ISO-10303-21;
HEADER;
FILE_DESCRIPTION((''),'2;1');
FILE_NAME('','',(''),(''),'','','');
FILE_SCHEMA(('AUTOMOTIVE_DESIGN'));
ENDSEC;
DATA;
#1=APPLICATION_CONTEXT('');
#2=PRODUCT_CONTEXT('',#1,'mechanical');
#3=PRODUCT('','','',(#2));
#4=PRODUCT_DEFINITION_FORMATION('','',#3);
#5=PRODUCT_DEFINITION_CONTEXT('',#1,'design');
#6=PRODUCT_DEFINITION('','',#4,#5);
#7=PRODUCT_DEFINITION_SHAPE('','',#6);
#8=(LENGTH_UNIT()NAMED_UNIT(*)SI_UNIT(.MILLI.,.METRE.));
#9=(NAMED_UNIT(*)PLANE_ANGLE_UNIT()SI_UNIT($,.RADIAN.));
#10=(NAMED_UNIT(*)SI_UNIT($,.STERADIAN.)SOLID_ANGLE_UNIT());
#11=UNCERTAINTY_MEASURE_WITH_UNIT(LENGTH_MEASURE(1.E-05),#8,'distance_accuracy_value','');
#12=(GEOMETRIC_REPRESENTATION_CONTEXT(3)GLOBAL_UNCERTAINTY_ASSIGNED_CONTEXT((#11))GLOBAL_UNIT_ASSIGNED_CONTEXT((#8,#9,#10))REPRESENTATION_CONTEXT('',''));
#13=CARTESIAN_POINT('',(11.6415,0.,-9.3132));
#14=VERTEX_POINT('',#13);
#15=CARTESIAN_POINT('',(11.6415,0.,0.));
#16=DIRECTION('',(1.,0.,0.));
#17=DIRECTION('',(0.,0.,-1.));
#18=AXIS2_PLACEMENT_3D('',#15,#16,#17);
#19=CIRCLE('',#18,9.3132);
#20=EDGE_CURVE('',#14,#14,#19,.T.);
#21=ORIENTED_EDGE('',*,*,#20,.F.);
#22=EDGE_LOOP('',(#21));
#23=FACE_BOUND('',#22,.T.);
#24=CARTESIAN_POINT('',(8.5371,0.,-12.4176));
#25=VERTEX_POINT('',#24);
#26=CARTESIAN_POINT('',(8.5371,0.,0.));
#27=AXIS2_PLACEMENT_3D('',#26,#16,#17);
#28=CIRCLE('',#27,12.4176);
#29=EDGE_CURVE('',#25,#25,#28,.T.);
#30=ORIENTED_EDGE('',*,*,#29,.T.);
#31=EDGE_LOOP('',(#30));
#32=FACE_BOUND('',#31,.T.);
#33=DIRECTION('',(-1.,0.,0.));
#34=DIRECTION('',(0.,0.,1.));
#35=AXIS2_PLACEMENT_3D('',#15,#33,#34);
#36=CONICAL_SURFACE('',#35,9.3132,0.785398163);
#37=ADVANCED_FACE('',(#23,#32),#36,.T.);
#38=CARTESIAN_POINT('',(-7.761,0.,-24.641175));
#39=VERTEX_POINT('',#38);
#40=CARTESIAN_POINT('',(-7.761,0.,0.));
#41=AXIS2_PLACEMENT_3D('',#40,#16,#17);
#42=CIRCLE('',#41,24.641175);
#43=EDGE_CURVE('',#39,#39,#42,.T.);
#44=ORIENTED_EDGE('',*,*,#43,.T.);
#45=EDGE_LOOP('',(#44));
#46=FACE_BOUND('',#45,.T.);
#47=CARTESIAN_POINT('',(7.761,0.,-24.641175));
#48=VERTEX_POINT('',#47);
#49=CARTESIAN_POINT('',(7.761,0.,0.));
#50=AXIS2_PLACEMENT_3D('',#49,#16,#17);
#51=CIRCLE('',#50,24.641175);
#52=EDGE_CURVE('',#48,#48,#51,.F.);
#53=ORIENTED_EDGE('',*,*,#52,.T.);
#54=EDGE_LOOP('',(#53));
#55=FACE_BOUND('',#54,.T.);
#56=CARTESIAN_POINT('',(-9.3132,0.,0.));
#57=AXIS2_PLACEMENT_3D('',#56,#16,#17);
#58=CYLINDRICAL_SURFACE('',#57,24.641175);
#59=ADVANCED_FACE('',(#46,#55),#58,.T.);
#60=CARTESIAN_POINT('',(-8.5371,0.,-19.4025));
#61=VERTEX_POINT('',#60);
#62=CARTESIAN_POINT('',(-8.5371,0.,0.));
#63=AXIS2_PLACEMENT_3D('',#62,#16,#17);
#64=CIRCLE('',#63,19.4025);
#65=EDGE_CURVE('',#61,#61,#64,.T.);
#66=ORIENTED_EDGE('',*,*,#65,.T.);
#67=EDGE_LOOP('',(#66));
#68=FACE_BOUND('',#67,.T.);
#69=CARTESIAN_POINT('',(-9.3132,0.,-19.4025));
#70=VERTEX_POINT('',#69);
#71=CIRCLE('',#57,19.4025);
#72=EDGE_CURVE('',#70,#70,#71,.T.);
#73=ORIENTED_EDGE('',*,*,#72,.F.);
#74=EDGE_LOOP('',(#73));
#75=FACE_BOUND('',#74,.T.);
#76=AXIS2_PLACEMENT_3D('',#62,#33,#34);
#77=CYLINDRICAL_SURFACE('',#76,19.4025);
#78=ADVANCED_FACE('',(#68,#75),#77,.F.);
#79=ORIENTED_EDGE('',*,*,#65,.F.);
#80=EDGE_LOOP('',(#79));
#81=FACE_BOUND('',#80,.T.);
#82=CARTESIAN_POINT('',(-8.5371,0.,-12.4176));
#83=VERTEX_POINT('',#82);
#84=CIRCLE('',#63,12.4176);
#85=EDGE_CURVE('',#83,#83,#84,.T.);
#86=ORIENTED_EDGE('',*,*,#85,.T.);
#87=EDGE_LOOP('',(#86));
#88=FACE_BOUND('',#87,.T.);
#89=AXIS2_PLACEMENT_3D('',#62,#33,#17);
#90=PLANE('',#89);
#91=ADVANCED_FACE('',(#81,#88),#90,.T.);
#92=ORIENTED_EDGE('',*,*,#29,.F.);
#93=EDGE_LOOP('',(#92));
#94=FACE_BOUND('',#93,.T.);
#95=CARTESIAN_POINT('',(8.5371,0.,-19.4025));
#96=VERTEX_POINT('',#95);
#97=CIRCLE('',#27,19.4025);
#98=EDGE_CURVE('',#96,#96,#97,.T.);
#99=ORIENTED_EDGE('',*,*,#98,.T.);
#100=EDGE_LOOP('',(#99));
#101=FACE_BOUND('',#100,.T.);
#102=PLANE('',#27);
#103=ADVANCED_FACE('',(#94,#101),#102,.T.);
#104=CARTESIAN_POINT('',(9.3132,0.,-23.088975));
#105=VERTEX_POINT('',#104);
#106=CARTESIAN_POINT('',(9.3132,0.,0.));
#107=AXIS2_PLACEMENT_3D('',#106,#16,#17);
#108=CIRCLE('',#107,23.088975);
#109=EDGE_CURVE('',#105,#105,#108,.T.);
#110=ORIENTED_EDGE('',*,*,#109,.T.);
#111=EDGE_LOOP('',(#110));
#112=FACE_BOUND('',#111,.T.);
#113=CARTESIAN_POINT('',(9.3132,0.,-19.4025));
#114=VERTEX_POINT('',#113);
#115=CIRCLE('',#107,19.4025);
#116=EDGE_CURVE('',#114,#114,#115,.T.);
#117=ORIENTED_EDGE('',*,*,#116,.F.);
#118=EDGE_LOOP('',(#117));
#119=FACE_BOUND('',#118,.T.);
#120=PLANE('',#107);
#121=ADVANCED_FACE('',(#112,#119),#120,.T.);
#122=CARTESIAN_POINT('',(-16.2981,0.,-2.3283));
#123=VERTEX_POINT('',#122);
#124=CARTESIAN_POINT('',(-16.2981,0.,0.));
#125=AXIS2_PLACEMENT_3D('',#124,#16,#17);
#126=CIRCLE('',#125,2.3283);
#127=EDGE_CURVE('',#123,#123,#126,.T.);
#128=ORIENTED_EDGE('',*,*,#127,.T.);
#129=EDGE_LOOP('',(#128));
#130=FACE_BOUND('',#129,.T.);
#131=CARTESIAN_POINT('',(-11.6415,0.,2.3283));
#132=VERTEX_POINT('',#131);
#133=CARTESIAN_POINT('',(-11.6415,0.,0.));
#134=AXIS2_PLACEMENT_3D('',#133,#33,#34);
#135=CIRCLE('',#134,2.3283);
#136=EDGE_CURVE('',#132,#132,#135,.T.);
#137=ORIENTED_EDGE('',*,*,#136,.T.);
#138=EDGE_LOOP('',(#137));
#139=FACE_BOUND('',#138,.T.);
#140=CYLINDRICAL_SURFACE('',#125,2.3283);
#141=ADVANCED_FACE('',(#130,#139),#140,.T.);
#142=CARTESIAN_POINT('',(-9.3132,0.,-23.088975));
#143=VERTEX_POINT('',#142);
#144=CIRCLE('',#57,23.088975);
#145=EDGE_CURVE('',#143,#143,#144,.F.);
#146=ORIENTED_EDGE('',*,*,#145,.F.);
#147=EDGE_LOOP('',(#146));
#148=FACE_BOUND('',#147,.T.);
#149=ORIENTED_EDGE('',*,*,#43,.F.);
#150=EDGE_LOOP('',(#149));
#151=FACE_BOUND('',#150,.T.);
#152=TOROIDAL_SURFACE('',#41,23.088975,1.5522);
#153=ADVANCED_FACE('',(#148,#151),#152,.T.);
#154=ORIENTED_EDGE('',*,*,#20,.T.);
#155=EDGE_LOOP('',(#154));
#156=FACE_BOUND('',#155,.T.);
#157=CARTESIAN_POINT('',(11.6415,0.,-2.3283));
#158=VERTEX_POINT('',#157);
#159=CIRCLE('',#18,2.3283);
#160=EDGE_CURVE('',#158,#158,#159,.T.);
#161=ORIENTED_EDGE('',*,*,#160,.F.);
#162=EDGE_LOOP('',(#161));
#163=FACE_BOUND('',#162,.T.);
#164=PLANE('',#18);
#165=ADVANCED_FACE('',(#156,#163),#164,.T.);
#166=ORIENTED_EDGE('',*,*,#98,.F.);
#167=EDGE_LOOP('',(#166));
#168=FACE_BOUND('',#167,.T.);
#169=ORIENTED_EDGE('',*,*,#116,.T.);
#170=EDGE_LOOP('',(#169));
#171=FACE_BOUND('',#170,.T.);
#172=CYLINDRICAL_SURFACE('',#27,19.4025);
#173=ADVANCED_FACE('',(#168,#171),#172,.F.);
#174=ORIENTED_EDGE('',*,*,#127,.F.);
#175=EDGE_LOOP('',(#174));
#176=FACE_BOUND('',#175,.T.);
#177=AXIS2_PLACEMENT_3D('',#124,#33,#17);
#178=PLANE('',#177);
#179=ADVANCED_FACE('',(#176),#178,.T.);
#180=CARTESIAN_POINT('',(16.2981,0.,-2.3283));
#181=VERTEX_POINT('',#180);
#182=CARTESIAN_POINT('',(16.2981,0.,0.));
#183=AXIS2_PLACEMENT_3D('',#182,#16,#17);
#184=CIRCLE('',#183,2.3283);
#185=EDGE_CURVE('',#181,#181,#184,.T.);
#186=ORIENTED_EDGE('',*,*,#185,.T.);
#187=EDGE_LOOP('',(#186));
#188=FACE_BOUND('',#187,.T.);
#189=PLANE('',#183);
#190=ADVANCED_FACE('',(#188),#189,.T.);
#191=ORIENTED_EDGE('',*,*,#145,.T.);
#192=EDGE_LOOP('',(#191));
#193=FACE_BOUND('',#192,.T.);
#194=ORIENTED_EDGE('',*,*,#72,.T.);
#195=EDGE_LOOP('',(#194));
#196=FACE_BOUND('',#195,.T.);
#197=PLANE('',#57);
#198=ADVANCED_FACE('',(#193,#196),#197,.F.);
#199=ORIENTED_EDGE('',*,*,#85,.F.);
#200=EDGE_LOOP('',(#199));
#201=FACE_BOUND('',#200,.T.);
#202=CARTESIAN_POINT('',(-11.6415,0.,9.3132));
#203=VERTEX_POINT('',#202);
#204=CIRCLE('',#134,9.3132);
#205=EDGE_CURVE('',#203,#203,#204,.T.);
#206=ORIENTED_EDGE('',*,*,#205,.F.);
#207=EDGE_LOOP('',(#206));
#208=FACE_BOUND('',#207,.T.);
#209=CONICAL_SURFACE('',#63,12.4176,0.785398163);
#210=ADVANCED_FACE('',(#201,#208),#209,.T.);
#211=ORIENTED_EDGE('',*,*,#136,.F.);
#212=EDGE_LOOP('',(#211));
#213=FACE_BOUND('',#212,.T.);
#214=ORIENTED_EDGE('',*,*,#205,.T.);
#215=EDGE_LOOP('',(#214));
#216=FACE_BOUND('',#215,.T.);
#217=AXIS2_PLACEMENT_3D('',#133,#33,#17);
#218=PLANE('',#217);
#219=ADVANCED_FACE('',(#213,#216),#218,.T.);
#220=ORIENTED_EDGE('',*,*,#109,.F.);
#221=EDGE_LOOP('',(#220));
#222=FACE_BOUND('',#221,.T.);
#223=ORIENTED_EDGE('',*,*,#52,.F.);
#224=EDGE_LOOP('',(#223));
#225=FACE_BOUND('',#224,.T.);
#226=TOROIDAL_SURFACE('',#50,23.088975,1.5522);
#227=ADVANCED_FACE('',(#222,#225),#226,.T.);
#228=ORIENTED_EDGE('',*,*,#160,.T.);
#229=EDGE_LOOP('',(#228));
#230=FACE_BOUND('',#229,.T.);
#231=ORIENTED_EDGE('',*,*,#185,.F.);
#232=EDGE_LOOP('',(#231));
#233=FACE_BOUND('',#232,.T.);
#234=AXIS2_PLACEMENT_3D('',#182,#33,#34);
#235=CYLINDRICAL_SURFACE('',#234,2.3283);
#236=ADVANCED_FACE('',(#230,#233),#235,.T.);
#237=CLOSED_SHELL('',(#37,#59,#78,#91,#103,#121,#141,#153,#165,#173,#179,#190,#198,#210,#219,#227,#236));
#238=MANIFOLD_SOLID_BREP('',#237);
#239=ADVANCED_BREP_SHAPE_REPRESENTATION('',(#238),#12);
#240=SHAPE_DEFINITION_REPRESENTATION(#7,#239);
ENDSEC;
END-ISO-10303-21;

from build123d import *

# Parameters (mm, degrees)
BOSS_EXTRUDE1_DEPTH      = 12
BOSS_EXTRUDE1_DEPTH_BACK = 12
SKETCH1_R                = 31.75
SKETCH2_R                = 25
SKETCH2_R_2              = 16
CUT_EXTRUDE1_DEPTH       = 1
BOSS_EXTRUDE2_START      = 3
SKETCH3_R                = 16
BOSS_EXTRUDE2_DEPTH      = 3
CHAMFER2_SIZE            = 4
FILLET1_R                = 2
SKETCH4_R                = 3
BOSS_EXTRUDE3_DEPTH      = 6
SCALE1_SCALE             = 0.7761


with BuildPart() as part:
    # Sketch1 → Boss-Extrude1 (new, two sides: drawn at the far end of the back side and taken through both)
    with BuildSketch(Plane(origin=(0, 0, 0), x_dir=(0, 0, -1), z_dir=(1, 0, 0)).offset(-BOSS_EXTRUDE1_DEPTH_BACK)):
        Circle(SKETCH1_R)
    extrude(amount=BOSS_EXTRUDE1_DEPTH + BOSS_EXTRUDE1_DEPTH_BACK)

    # Sketch2 → Cut-Extrude1 (cut)
    with BuildSketch(Plane(origin=(12, 0, 0), x_dir=(0, 0, -1), z_dir=(1, 0, 0))):
        Circle(SKETCH2_R)
        Circle(SKETCH2_R_2, mode=Mode.SUBTRACT)
    cut_extrude1 = extrude(amount=-CUT_EXTRUDE1_DEPTH, mode=Mode.SUBTRACT)

    # Sketch3 → Boss-Extrude2 (add)
    with BuildSketch(Plane(origin=(12, 0, 0), x_dir=(0, 0, -1), z_dir=(1, 0, 0)).offset(BOSS_EXTRUDE2_START)):
        Circle(SKETCH3_R)
    boss_extrude2 = extrude(amount=-BOSS_EXTRUDE2_DEPTH)

    # Mirror1: Cut-Extrude1, Boss-Extrude2 across plane
    add(cut_extrude1.mirror(Plane(origin=(0, 0, 0), x_dir=(0, 0, 1), z_dir=(1, 0, 0))), mode=Mode.SUBTRACT)
    add(boss_extrude2.mirror(Plane(origin=(0, 0, 0), x_dir=(0, 0, 1), z_dir=(1, 0, 0))))

    # Chamfer2
    # the kernel refuses this chamfer: 4 mm, written as the material it takes off along each edge
    with BuildSketch(Plane(origin=(15, 0, 0), x_dir=(0, 0, -1), z_dir=(0, -1, 0))) as chamfer2_piece_1_section:
        Polygon((16, -CHAMFER2_SIZE), (16 - CHAMFER2_SIZE, 0), (16, 0), align=None)
    chamfer2_piece_1 = revolve(axis=Axis((15, 0, 0), (1, 0, 0)), mode=Mode.PRIVATE)
    chamfer2_piece_1 = split(chamfer2_piece_1, bisect_by=Plane(origin=(11, 0, 14.009360732), z_dir=(1, 0, 0)), keep=Keep.TOP, mode=Mode.PRIVATE)
    add(chamfer2_piece_1, mode=Mode.SUBTRACT)
    with BuildSketch(Plane(origin=(-15, 0, 0), x_dir=(0, 0, -1), z_dir=(0, -1, 0))) as chamfer2_piece_2_section:
        Polygon((16, CHAMFER2_SIZE), (16 - CHAMFER2_SIZE, 0), (16, 0), align=None)
    chamfer2_piece_2 = revolve(axis=Axis((-15, 0, 0), (1, 0, 0)), mode=Mode.PRIVATE)
    chamfer2_piece_2 = split(chamfer2_piece_2, bisect_by=Plane(origin=(-11, 0, 14.009360732), z_dir=(-1, 0, 0)), keep=Keep.TOP, mode=Mode.PRIVATE)
    add(chamfer2_piece_2, mode=Mode.SUBTRACT)

    # Fillet1
    fillet1_edges = [part.edges().sort_by_distance(p)[0] for p in [
        (-12, 0, 31.75),
        (12, 0, 31.75),
    ]]
    fillet(fillet1_edges, radius=FILLET1_R)

    # Sketch4 → Boss-Extrude3 (add)
    with BuildSketch(Plane(origin=(15, 0, 0), x_dir=(0, 0, -1), z_dir=(1, 0, 0))):
        Circle(SKETCH4_R)
    boss_extrude3 = extrude(amount=BOSS_EXTRUDE3_DEPTH)

    # Mirror2: Boss-Extrude3 across plane
    add(boss_extrude3.mirror(Plane(origin=(0, 0, 0), x_dir=(0, 0, 1), z_dir=(1, 0, 0))))


with BuildPart() as part_1:
    # Scale1: scaled about (0, 0, 0)
    add(part.part.scale(SCALE1_SCALE))


solid = part_1.part
